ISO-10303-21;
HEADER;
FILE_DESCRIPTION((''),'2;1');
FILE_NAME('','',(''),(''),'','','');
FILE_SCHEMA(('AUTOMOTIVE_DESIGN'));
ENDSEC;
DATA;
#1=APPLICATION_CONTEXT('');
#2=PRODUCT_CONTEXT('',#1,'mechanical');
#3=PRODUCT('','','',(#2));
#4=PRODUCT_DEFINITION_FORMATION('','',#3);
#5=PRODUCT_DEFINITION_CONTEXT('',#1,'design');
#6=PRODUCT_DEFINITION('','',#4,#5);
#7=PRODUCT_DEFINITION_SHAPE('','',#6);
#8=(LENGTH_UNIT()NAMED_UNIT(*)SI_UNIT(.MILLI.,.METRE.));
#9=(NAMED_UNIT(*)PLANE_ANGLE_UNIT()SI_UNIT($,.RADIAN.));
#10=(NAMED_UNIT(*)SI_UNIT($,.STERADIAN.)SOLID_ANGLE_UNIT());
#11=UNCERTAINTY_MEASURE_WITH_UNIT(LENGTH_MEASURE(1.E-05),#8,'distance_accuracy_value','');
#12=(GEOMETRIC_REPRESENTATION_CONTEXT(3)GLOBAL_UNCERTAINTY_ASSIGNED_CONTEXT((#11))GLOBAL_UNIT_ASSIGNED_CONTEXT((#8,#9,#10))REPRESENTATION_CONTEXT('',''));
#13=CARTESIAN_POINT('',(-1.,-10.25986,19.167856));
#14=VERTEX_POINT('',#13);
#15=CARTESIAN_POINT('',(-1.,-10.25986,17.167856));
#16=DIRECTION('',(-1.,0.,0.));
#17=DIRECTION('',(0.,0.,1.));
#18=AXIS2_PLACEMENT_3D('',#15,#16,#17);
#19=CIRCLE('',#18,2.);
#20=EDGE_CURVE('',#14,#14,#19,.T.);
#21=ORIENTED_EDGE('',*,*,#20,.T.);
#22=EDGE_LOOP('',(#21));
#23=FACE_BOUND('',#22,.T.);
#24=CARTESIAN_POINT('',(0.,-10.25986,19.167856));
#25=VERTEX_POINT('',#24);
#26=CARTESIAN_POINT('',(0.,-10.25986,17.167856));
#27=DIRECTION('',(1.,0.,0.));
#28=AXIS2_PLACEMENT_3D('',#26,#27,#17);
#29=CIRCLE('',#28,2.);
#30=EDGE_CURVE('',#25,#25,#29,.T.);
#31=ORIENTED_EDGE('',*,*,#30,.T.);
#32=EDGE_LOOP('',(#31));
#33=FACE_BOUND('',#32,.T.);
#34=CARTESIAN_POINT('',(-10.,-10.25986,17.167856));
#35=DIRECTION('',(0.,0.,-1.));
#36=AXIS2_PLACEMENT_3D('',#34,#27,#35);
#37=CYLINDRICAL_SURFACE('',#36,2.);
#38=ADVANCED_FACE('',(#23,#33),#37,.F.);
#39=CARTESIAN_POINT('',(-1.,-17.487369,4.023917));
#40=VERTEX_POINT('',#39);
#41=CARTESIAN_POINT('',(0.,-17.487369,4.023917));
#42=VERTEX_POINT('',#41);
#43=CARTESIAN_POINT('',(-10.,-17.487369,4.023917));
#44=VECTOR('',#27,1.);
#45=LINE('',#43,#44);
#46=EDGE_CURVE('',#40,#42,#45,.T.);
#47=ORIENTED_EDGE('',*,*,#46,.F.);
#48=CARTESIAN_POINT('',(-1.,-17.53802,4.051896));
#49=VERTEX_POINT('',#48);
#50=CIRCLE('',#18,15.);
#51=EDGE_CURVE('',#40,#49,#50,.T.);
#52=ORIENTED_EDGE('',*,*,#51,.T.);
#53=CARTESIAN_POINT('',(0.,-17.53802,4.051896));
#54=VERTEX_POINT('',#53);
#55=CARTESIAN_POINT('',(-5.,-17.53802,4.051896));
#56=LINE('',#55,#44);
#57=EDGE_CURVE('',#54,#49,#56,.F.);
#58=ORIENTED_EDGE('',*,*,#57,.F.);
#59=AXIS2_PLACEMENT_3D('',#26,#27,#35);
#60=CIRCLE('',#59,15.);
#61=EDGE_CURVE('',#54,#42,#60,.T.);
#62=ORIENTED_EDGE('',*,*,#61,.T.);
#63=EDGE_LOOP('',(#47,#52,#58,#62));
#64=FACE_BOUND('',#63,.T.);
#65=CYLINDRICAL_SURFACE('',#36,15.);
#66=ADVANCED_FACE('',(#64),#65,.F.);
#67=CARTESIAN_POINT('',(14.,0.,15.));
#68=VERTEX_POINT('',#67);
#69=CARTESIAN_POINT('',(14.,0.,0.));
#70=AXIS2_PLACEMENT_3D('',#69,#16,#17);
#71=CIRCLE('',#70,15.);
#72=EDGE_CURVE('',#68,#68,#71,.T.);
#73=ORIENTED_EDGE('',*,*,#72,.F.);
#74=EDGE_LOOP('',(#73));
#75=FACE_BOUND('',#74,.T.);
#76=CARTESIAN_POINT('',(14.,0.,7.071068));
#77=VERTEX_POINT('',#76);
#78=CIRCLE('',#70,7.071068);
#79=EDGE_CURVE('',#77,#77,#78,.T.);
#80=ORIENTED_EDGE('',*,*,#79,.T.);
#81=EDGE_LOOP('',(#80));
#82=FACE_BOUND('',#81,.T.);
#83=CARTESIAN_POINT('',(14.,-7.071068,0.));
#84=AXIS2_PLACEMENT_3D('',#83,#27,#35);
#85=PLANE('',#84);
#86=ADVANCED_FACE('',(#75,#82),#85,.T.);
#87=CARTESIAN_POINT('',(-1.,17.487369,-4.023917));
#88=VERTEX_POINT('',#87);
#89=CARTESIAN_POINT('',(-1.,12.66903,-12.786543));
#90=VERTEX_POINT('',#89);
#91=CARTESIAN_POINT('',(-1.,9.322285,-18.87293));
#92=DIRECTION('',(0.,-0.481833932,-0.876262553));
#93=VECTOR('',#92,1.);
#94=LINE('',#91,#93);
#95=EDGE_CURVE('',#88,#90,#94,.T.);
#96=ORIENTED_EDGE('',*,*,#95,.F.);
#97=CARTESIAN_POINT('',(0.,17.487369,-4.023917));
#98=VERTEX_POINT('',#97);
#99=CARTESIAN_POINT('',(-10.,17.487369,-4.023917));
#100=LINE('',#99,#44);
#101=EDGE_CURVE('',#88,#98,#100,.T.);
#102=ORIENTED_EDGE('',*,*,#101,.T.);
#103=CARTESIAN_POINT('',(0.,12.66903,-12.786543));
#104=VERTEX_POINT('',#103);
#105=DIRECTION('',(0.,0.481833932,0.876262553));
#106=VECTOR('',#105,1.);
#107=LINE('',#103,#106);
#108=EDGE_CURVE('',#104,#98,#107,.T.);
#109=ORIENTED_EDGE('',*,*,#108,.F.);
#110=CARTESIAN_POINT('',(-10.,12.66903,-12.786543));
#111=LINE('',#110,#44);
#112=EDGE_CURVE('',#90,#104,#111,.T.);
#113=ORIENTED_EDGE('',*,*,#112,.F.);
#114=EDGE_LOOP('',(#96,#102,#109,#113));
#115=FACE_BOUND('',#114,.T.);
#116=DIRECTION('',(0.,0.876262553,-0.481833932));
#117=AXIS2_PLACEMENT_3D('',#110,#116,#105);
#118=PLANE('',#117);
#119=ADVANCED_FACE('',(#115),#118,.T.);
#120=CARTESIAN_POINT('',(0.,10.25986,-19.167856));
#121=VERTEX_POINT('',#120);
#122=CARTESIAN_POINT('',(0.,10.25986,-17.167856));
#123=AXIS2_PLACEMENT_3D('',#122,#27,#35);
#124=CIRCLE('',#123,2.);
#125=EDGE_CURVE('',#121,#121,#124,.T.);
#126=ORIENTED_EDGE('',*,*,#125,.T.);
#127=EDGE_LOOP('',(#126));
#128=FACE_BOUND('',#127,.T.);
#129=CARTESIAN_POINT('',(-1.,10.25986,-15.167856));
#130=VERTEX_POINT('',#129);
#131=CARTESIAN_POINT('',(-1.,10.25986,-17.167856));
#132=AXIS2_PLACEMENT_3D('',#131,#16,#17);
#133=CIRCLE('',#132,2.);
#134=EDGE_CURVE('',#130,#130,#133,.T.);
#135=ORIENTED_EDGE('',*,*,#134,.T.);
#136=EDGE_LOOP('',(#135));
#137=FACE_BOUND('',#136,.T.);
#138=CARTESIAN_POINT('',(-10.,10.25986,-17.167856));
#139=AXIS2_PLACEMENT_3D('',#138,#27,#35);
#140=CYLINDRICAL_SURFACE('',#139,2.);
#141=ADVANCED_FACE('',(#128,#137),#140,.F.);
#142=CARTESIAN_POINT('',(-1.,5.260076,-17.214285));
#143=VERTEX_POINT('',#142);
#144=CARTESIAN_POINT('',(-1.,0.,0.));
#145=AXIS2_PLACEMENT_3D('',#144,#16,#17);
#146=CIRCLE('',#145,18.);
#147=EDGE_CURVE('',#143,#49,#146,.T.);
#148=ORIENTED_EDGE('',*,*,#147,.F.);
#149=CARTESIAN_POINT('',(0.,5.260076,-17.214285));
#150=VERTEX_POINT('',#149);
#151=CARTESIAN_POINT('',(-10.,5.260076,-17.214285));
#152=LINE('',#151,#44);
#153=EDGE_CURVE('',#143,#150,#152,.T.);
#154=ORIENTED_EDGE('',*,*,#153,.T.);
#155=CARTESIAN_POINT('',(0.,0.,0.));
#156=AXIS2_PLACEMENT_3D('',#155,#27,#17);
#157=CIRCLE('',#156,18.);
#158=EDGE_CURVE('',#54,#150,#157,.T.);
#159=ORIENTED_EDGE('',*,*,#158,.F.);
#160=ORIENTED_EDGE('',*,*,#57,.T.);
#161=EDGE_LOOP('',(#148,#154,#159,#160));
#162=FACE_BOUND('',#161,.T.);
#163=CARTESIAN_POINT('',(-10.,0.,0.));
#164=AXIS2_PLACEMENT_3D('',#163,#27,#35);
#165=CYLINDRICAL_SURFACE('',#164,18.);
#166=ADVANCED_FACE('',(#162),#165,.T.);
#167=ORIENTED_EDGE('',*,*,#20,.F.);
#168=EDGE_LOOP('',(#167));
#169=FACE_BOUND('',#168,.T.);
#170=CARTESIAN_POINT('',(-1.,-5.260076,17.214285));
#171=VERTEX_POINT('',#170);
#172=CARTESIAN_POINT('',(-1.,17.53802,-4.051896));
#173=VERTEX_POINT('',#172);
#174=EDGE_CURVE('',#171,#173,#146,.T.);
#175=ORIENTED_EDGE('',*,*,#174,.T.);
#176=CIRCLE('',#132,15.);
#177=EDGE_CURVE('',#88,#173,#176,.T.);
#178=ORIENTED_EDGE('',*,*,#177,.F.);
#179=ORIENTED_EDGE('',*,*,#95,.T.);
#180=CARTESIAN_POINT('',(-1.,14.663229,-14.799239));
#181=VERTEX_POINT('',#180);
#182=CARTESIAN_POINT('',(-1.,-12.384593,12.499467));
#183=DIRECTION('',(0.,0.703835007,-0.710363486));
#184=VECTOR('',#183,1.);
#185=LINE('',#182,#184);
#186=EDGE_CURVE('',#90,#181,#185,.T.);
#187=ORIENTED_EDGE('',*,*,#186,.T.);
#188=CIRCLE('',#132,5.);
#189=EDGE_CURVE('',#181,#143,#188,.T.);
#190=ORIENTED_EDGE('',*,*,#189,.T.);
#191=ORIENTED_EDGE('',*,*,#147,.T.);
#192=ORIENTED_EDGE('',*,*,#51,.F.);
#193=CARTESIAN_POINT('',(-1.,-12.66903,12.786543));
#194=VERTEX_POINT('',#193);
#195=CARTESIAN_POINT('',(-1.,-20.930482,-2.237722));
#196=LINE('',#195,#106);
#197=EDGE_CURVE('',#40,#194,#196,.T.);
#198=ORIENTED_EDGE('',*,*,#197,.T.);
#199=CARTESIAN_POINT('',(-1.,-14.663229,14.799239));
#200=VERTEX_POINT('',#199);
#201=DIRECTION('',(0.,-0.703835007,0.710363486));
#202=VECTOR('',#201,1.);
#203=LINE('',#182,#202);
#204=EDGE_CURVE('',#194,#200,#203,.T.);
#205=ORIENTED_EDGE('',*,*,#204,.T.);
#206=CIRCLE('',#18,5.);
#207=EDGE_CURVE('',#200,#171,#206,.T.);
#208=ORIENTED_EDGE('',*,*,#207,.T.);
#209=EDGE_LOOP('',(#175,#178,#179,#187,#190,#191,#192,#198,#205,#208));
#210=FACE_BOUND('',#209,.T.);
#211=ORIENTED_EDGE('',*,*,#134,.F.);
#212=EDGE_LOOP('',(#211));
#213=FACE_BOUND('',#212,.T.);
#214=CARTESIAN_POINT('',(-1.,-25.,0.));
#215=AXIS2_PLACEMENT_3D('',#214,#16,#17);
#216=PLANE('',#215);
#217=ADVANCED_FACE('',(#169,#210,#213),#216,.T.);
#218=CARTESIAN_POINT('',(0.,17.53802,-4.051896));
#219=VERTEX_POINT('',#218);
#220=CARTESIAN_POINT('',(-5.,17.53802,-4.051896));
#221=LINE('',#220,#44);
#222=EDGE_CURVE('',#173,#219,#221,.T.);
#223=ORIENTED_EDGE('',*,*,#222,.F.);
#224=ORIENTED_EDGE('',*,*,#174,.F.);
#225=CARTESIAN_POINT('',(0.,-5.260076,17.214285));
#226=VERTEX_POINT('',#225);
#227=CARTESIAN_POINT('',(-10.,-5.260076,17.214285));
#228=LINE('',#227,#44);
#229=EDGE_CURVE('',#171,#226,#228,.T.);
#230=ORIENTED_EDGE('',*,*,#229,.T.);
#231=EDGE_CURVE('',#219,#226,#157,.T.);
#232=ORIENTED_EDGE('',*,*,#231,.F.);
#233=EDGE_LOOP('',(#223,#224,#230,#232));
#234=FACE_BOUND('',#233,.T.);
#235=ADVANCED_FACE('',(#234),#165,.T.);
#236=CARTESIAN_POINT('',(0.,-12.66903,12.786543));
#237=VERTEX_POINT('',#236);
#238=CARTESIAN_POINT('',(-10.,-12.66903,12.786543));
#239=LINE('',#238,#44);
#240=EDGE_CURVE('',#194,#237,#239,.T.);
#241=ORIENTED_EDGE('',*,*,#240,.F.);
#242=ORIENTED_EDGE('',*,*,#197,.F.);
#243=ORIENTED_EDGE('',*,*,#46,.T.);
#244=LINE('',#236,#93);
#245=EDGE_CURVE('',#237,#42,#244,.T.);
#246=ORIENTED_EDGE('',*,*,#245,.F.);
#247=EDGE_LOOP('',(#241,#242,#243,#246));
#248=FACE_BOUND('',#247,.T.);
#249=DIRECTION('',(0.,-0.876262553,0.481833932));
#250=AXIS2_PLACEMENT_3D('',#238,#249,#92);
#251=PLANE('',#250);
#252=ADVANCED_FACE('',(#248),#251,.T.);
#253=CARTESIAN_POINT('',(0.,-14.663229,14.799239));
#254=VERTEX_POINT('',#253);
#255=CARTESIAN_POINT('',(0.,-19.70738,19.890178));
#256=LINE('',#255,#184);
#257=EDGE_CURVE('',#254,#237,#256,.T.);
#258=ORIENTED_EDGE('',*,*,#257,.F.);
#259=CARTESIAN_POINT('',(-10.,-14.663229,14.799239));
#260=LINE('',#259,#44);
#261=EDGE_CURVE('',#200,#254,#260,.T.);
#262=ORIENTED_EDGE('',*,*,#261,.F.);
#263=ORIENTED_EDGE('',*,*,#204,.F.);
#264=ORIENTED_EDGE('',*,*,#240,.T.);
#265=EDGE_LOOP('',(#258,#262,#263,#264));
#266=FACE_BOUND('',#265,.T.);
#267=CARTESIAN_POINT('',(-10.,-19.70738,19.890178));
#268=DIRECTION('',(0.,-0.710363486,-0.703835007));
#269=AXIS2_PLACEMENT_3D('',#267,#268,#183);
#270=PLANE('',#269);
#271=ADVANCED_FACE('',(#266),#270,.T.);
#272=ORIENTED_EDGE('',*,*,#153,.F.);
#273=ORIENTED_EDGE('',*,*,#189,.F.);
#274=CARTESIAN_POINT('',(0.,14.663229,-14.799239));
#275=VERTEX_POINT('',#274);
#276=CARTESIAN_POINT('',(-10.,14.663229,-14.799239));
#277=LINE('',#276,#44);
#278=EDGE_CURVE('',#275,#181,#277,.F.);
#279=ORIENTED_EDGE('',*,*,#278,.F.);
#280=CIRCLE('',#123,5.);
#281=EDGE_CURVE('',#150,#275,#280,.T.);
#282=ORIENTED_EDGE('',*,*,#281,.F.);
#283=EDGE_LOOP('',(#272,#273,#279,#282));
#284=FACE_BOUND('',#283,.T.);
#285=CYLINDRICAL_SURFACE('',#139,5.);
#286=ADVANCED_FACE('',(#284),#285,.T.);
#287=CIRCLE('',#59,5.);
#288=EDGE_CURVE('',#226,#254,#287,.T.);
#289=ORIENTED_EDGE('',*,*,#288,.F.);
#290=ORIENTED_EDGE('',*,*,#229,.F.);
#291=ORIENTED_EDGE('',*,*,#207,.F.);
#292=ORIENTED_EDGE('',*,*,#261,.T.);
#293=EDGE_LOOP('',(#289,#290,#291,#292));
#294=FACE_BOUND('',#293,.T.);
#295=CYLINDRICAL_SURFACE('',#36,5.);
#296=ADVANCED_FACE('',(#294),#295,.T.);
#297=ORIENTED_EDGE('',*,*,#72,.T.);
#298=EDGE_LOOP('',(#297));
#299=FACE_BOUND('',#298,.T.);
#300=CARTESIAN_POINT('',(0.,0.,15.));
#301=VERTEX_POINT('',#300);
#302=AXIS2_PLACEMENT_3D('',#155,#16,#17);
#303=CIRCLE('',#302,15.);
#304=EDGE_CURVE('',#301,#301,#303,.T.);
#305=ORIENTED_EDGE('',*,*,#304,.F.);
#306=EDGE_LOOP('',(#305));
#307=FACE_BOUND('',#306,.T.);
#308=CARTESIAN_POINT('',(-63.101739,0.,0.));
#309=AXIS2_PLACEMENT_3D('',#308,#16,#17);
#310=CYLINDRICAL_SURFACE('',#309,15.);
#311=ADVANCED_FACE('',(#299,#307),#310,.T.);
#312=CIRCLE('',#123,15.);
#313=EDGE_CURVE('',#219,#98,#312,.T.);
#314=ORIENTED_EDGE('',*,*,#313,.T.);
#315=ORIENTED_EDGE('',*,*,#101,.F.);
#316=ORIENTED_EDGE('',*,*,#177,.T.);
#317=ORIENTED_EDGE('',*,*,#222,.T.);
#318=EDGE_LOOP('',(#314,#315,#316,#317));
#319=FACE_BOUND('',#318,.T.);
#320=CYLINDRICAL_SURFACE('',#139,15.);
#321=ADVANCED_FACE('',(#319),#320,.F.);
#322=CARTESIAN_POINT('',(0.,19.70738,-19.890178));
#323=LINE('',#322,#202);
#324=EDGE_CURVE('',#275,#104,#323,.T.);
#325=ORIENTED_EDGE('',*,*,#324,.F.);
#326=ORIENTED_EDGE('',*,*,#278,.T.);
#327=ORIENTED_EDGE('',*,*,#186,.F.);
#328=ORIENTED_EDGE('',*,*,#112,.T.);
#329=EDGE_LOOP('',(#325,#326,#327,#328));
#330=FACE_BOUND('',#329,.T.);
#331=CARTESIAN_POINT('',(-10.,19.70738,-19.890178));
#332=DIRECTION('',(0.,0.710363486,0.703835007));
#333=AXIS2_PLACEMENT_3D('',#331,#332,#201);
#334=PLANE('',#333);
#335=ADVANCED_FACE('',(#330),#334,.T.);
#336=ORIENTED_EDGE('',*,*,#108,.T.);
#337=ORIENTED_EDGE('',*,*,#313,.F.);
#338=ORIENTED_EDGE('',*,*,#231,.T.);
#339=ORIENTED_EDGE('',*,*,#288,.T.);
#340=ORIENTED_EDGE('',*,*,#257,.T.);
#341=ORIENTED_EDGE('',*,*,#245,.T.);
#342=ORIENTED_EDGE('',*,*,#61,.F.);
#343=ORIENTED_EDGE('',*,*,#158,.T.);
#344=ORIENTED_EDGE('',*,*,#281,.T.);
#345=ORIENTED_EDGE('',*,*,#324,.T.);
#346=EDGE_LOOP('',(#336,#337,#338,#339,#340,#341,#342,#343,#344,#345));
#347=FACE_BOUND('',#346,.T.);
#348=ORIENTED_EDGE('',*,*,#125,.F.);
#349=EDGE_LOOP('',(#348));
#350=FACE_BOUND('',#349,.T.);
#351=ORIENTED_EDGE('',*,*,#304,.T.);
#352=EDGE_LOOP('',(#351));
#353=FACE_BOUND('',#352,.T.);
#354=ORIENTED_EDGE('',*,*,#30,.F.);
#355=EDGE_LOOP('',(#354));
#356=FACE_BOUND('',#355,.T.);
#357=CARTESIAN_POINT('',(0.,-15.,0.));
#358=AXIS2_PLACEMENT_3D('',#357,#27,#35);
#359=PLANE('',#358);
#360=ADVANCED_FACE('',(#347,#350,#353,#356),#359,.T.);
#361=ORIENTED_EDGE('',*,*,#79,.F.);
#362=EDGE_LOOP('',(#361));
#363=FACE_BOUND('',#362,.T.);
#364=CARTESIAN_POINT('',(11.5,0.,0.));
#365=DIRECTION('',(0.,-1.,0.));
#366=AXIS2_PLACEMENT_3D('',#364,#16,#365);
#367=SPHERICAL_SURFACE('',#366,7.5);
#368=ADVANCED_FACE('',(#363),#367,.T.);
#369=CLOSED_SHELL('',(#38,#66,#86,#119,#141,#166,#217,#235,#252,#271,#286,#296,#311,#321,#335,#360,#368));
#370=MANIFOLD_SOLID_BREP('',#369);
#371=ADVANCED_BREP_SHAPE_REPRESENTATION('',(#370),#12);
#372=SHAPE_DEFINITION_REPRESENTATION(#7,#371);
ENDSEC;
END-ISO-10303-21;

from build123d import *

# Parameters (mm, degrees)
ESQUISSE4_R                     = 2
ENL_V_MAT_EXTRU_1_DEPTH         = 10
R_P_TITION_CIRCULAIRE1_COUNT    = 2
ENL_V_START                     = -1
ENL_V_DE_MAT_EXTRU_MINCE1_DEPTH = 1


# Read off the part's stored shape, not the designer's step: Enlèv. de mat.-Extru.-Mince1
with BuildPart() as part:
    # Esquisse3 → Révolution5 (revolve)
    with BuildSketch(Plane.XY, mode=Mode.PRIVATE) as r_volution5_sk:
        with BuildLine():
            Line((14, -7.071067812), (14, -15))
            Line((14, -15), (0, -15))
            Line((0, -15), (0, -25))
            Line((0, -25), (-1, -25))
            Line((-1, -25), (-1, 0))
            Line((-1, 0), (19, 0))
            ThreePointArc((19, 0), (17.623724357, -4.330127019), (14, -7.071067812))
        make_face()
    revolve(r_volution5_sk.sketch.rotate(Axis((-63.101738984, 0, 0), (1, 0, 0)), 270), axis=Axis((-63.101738984, 0, 0), (1, 0, 0)))

    # Esquisse4 → Enlèv. mat.-Extru.1 (cut)
    with BuildSketch(Plane(origin=(0, 0, 0), x_dir=(0, 0, -1), z_dir=(1, 0, 0))):
        with Locations((17.167855519, 10.259860471)):
            Circle(ESQUISSE4_R)
    enl_v_mat_extru_1 = extrude(amount=-ENL_V_MAT_EXTRU_1_DEPTH, mode=Mode.SUBTRACT)

    # Répétition circulaire1: Enlèv. mat.-Extru.1 ×2 about axis
    r_p_tition_circulaire1_axis = Axis((0, 0, 0), (1, 0, 0))
    for i in range(1, R_P_TITION_CIRCULAIRE1_COUNT):
        add(enl_v_mat_extru_1.rotate(r_p_tition_circulaire1_axis, i * 360 / R_P_TITION_CIRCULAIRE1_COUNT), mode=Mode.SUBTRACT)

    # Enlèv. de mat.-Extru.-Mince1 outline → Enlèv. de mat.-Extru.-Mince1 (cut)
    with BuildSketch(Plane(origin=(0, 0, 0), x_dir=(0, 0, -1), z_dir=(1, 0, 0)).offset(ENL_V_START)):
        with BuildLine():
            ThreePointArc((-21.459819345, -12.824825678), (-21.528104694, -7.812775037), (-17.214284766, -5.260076044))
            ThreePointArc((-17.214284766, -5.260076044), (-13.162462305, 12.278012301), (4.051895913, 17.538019829))
            ThreePointArc((4.051895913, 17.538019829), (4.037882143, 17.51270813), (4.02391722, 17.487369448))
            Line((4.02391722, 17.487369448), (12.786542752, 12.66903013))
            Line((12.786542752, 12.66903013), (14.799239297, 14.663229317))
            ThreePointArc((14.799239297, 14.663229317), (18.49817446, 15.079637594), (21.459819345, 12.824825678))
            ThreePointArc((21.459819345, 12.824825678), (-12.824825678, 21.459819345), (-21.459819345, -12.824825678))
        make_face()
        with BuildLine():
            ThreePointArc((-14.799239297, -14.663229317), (-18.49817446, -15.079637594), (-21.459819345, -12.824825678))
            ThreePointArc((-21.459819345, -12.824825678), (12.824825678, -21.459819345), (21.459819345, 12.824825678))
            ThreePointArc((21.459819345, 12.824825678), (21.528104694, 7.812775037), (17.214284766, 5.260076044))
            ThreePointArc((17.214284766, 5.260076044), (13.162462305, -12.278012301), (-4.051895913, -17.538019829))
            ThreePointArc((-4.051895913, -17.538019829), (-4.037882143, -17.51270813), (-4.02391722, -17.487369448))
            Line((-4.02391722, -17.487369448), (-12.786542752, -12.66903013))
            Line((-12.786542752, -12.66903013), (-14.799239297, -14.663229317))
        make_face()
    extrude(amount=ENL_V_DE_MAT_EXTRU_MINCE1_DEPTH, mode=Mode.SUBTRACT)


solid = part.part
